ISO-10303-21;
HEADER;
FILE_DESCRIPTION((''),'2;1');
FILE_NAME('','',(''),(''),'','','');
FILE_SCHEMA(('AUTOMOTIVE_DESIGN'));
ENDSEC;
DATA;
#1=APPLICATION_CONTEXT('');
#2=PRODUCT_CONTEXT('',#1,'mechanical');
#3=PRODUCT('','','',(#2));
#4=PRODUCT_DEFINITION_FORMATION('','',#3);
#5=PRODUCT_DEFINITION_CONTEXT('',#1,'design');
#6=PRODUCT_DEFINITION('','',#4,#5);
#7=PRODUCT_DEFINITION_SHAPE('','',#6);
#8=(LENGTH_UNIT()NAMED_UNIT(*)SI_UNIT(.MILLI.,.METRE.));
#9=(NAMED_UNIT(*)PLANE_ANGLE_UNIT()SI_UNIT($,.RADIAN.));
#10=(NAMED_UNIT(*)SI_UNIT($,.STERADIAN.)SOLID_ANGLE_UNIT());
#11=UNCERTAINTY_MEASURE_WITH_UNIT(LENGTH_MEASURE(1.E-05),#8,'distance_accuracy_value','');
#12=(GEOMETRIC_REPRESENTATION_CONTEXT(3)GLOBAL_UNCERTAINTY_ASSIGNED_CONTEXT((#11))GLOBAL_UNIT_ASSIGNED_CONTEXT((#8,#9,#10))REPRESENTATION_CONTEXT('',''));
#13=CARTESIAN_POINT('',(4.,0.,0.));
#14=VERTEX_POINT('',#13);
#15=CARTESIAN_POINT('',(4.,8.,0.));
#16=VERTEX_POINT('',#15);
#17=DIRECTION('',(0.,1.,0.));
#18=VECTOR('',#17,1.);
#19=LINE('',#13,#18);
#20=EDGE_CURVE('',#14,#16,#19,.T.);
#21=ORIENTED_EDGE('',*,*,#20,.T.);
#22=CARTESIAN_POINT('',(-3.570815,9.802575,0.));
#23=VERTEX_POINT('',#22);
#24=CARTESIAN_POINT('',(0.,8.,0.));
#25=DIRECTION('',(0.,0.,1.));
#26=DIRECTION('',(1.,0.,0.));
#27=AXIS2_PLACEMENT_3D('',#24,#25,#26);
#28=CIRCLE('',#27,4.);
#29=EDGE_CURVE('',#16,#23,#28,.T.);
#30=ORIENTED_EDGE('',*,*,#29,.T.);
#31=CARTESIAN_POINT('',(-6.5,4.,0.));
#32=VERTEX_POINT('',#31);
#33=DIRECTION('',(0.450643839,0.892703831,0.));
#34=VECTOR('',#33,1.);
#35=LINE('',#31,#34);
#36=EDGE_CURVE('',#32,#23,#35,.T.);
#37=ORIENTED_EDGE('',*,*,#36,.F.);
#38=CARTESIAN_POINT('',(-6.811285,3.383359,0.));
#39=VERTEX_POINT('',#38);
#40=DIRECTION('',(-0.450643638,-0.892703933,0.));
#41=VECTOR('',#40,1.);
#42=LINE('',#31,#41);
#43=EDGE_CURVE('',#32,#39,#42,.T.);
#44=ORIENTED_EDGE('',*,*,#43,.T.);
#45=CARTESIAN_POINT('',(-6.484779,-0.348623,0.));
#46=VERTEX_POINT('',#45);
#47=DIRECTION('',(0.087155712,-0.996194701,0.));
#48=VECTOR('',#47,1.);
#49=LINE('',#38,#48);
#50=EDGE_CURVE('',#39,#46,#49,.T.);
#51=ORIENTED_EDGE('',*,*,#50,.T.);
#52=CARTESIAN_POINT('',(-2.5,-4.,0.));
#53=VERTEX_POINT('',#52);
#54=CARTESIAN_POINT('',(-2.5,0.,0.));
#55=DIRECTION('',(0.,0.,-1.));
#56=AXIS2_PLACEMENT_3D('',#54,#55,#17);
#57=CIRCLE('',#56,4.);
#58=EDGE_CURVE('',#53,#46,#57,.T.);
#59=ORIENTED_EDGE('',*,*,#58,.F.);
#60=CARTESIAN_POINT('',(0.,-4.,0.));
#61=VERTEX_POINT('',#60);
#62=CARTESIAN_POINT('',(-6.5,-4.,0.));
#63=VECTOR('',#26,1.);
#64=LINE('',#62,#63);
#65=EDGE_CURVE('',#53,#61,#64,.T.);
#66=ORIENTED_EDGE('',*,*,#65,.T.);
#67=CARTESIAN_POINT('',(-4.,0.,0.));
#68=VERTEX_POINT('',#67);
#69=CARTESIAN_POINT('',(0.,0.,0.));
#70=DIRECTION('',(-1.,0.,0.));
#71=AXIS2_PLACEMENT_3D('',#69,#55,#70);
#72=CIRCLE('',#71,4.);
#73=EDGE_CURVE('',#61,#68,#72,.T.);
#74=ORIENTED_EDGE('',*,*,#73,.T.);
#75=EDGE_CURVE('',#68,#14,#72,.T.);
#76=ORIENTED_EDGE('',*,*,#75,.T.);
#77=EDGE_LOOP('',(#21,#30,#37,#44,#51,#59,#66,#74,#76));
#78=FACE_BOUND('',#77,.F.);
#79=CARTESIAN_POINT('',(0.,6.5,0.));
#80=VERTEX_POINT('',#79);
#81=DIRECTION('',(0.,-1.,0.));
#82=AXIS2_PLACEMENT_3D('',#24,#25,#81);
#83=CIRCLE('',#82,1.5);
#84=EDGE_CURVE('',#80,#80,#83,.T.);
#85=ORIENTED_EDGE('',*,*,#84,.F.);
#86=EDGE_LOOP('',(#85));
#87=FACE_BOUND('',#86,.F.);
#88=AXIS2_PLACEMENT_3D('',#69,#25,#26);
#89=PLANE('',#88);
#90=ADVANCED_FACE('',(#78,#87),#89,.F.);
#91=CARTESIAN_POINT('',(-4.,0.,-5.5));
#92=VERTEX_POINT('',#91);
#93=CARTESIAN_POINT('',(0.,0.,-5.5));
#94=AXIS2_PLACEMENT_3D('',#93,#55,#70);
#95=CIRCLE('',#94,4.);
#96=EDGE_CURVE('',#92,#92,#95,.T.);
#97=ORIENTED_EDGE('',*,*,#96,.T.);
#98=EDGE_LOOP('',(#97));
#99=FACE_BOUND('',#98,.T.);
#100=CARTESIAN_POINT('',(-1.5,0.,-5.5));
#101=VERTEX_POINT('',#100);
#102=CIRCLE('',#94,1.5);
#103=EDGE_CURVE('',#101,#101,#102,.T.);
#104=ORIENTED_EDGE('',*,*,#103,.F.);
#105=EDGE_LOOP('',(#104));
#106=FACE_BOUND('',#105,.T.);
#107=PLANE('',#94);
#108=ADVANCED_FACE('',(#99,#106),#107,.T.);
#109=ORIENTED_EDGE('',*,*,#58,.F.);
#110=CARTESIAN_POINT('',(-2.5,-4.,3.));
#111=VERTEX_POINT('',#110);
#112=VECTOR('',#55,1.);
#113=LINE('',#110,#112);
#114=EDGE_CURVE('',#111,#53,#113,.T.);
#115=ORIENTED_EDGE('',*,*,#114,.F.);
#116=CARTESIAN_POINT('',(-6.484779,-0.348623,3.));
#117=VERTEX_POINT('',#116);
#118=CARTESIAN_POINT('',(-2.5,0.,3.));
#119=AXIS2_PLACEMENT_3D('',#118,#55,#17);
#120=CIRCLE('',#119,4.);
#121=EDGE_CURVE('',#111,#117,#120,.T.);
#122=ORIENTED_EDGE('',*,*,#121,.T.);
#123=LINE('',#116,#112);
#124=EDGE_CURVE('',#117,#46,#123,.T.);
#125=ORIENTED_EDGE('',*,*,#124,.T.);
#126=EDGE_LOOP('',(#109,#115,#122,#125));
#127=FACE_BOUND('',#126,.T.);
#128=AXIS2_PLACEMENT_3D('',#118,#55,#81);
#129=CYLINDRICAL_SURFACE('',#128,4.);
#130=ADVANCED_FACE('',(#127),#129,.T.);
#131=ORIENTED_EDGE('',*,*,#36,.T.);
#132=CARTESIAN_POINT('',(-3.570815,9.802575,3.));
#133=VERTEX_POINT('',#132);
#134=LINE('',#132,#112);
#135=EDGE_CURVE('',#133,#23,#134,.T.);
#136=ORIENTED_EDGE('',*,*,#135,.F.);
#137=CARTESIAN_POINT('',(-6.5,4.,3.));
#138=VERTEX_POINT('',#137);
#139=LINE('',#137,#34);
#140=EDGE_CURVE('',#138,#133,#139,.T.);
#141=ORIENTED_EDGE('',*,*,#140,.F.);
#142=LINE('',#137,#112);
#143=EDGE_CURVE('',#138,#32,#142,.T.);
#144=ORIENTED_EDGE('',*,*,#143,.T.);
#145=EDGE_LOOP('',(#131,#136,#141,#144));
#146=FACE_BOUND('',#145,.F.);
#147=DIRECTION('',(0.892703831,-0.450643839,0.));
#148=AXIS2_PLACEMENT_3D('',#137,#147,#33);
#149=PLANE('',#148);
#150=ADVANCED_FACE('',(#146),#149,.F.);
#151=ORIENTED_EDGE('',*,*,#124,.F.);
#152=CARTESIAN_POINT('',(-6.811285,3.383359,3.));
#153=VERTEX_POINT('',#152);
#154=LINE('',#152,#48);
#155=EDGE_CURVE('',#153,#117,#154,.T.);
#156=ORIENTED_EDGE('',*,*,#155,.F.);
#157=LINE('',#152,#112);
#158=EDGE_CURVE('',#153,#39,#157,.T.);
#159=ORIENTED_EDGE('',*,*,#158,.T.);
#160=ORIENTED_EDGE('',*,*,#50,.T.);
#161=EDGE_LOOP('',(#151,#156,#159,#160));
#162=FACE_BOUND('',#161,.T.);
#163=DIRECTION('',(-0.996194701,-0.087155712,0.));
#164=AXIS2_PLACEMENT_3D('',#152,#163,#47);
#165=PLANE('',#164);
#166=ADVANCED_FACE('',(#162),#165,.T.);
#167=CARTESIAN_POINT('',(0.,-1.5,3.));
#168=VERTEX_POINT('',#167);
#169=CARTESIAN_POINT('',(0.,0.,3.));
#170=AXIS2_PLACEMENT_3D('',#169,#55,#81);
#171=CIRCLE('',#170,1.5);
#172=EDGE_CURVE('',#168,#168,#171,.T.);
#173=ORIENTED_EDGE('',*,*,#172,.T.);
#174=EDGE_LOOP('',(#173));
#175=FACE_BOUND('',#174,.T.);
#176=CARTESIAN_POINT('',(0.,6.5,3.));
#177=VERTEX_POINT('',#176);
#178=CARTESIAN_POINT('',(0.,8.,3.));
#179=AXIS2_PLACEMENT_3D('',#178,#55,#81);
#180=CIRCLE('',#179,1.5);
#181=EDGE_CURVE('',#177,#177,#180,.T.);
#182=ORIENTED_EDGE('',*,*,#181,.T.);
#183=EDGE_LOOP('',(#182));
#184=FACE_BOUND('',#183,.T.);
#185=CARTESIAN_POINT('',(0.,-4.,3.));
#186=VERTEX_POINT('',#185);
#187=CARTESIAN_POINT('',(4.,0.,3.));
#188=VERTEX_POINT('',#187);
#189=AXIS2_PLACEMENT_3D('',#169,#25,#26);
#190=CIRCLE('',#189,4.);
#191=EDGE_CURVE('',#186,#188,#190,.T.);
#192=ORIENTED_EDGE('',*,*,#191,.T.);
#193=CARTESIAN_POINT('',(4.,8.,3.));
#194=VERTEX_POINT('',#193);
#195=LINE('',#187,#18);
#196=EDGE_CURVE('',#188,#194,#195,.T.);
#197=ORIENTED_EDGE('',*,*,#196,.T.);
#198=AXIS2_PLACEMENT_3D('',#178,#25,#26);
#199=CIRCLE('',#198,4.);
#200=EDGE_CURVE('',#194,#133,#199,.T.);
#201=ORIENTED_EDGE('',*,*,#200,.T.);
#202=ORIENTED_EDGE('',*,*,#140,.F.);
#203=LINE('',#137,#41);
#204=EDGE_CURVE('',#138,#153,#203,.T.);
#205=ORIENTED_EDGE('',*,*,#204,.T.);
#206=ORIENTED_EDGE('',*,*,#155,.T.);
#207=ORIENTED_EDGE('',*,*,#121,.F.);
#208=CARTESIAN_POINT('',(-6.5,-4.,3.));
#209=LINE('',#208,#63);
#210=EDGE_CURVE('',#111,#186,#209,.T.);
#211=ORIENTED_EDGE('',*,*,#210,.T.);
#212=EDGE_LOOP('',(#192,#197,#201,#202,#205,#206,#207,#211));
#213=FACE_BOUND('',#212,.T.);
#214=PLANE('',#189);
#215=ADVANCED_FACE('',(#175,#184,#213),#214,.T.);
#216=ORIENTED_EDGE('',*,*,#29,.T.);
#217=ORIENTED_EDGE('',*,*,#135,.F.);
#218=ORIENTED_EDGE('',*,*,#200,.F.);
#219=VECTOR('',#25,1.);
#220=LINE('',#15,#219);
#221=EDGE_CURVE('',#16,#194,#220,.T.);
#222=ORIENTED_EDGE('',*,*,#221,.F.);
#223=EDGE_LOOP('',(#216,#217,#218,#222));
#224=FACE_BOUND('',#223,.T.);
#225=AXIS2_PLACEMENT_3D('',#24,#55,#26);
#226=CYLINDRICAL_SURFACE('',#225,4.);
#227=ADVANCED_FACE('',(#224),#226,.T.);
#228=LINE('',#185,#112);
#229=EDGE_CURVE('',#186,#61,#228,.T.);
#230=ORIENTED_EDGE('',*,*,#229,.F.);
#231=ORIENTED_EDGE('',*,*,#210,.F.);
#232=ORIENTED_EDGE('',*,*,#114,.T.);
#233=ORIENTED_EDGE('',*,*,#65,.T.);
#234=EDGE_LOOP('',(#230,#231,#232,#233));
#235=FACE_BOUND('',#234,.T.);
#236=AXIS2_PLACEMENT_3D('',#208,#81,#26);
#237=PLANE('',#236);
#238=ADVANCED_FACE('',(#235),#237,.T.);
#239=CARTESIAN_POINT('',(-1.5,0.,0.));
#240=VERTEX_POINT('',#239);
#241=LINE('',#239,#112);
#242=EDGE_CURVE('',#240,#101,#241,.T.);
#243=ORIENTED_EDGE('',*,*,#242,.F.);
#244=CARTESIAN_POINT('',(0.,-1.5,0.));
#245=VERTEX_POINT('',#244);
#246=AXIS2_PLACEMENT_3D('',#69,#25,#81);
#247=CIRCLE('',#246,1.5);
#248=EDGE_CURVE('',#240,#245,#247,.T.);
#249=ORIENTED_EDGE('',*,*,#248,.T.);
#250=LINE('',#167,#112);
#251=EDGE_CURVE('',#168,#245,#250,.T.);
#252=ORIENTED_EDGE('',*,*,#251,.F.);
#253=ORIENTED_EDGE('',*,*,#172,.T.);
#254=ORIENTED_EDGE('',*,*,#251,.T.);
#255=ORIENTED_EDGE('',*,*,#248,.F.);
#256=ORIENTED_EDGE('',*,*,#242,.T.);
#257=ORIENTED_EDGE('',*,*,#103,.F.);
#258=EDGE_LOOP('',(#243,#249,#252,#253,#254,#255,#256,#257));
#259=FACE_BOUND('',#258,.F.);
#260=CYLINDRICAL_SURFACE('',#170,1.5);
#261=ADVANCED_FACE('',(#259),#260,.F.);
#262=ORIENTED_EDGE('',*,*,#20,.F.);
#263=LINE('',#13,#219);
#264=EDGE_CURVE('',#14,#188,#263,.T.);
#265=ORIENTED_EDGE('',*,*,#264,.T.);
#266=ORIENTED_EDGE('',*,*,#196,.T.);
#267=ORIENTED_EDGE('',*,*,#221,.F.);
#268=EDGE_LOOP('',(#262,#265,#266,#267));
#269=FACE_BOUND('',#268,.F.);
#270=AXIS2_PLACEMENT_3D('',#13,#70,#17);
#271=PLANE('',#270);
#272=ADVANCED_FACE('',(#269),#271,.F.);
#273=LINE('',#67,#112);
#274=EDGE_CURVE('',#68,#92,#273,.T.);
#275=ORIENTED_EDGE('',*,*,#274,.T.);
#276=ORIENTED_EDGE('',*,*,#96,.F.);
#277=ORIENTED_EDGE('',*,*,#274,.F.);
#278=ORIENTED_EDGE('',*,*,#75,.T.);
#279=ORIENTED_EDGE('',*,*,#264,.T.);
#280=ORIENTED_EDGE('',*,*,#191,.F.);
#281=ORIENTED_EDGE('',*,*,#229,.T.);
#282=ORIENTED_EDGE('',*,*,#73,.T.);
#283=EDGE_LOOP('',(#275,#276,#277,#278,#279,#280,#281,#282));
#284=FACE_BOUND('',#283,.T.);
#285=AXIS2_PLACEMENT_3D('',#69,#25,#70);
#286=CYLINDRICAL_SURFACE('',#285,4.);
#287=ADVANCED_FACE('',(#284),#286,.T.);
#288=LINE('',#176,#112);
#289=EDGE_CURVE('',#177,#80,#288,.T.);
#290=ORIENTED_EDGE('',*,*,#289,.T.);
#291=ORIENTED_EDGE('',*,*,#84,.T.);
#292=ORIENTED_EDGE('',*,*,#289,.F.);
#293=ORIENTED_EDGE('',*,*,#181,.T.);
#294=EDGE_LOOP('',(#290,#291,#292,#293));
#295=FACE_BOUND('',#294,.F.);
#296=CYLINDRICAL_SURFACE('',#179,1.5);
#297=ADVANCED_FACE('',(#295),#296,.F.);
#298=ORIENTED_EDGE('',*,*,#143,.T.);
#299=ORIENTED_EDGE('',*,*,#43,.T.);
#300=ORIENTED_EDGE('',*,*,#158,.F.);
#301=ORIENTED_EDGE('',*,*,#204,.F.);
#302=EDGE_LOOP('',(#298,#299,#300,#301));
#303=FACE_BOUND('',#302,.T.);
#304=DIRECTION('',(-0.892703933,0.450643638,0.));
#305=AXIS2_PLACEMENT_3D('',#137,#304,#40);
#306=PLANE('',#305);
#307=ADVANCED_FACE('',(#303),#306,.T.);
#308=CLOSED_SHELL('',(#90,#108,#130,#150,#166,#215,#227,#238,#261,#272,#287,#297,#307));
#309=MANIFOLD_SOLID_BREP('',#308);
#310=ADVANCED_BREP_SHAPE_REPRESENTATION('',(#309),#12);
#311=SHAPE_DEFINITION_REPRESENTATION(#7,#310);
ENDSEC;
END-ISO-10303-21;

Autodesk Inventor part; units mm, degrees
ref_plane "YZ Plane" through (0, 0, 0) normal (1, 0, 0) x (0, 1, 0)
ref_plane "XZ Plane" through (0, 0, 0) normal (0, 1, 0) x (-1, 0, 0)
ref_plane "XY Plane" through (0, 0, 0) normal (0, 0, 1) x (1, 0, 0)
sketch "Skizze1" plane through (0, 0, 0) normal (0, 0, 1) x (1, 0, 0)
  circle A0 centre (0, 0) radius 4
  circle A1 centre (0, 8) radius 4
  line L0 (0, 0) -> (0, 8) construction
  line L1 (-4, 8) -> (-4, 0)
  line L2 (4, 0) -> (4, 8)
  dimension "d0" = 8
  dimension "d1" = 8
  dimension "d4" = 8
extrude "Extrusion1" add sketch "Skizze1" along normal blind 3
ref_plane "Arbeitsebene1" through (0, 8, 0) normal (1, 0, 0) x (0, 0, 1)
sketch "Skizze2" plane through (0, 0, 3) normal (0, 0, 1) x (1, 0, 0)
  arc A0 (-4, 0) -> (4, 0) centre (0, 0) ccw projected
  arc A1 (4, 8) -> (-4, 8) centre (0, 8) ccw projected
hole "Bohrung1" at (0, 8, 3) direction (0, 0, -1) diameter 3 end through all
hole "Bohrung2" at (0, 0, 3) direction (0, 0, -1) diameter 3 end through all
sketch "Skizze3" plane through (0, 0, 3) normal (0, 0, 1) x (1, 0, 0)
  arc A0 (-4, 0) -> (4, 0) centre (0, 0) ccw
  line L0 (4, 0) -> (4, 8)
  arc A1 (4, 8) -> (-4, 8) centre (0, 8) ccw
  line L1 (-6.5, 4) -> (-6.5, -4)
  line L2 (-6.5, -4) -> (0, -4)
  line L3 (-6.5, 4) -> (-3.570815, 9.802575)
  circle A2 centre (0, 0) radius 4 construction
  line L4 (0, 4) -> (-6.5, 4) construction
  circle A3 centre (0, 8) radius 1.5
  arc A4 (-4, 0) -> (4, 0) centre (0, 0) ccw
  circle A5 centre (0, 0) radius 1.5
  dimension "d16" = 6.5
extrude "Extrusion2" add sketch "Skizze3" against normal up to surface (3 mm away)
fillet "Rundung1" radius 4 1 edges at (-6.5, -4, 1.5)
sketch "Skizze4" plane through (0, 0, 0) normal (0, 0, -1) x (-1, 0, 0)
  arc A0 (-4, 0) -> (0, -4) centre (0, 0) ccw
  circle A1 centre (0, 0) radius 1.5
  circle A2 centre (0, 0) radius 4
  line L0 (6.5, 4) -> (0, 4)
  arc A3 (-4, 0) -> (0, -4) centre (0, 0) ccw projected
  circle A4 centre (0, 0) radius 1.5 projected
  point P0 (3.18396, 8.32)
  point P1 (3.97995, 0.4)
sketch "Skizze4 outline for Extrusion3" plane through (0, 0, 0) normal (0, 0, -1) x (-1, 0, 0)
  circle A0 centre (0, 0) radius 4
  circle A1 centre (0, 0) radius 1.5
extrude "Extrusion3" add sketch "Skizze4 outline for Extrusion3" along normal blind 5.5
sketch "Skizze5" plane through (0, 0, 3) normal (0, 0, 1) x (1, 0, 0)
  arc A0 (-6.5, 0) -> (-2.5, -4) centre (-2.5, 0) ccw
  line L0 (-3.570815, 9.802575) -> (-6.5, 4)
  line L1 (-6.5, 4) -> (-6.5, 0)
  line L2 (-6.5, 4) -> (-6.811285, 3.383359)
  line L3 (-6.811285, 3.383359) -> (-6.484779, -0.348623)
  dimension "d26" = 5
extrude "Extrusion4" add sketch "Skizze5" against normal up to surface (3 mm away)
equation "\"d0\" = Finger_diameter"
equation "\"d1\" = d0"
equation "\"d4\" = d0"
equation "\"d2\" = Join_width"
equation "\"d5\" = bearingHole"
equation "\"d19\" = bearingHole"
equation "\"FingerLaenge_B\" = 25"
equation "\"Hebel_B\" = 25"
equation "\"Finger_width\" = 22"
equation "\"Finger_diameter\" = 8"
equation "\"FingerWall\" = 3"
equation "\"Hebel_basis_2\" = 15"
equation "\"Join_width\" = 3"
equation "\"bearingHole\" = 3"
equation "\"bearingWall\" = 4"
equation "\"support_D\" = 0.25"
properties part number "FingerTip_joint _v2"
